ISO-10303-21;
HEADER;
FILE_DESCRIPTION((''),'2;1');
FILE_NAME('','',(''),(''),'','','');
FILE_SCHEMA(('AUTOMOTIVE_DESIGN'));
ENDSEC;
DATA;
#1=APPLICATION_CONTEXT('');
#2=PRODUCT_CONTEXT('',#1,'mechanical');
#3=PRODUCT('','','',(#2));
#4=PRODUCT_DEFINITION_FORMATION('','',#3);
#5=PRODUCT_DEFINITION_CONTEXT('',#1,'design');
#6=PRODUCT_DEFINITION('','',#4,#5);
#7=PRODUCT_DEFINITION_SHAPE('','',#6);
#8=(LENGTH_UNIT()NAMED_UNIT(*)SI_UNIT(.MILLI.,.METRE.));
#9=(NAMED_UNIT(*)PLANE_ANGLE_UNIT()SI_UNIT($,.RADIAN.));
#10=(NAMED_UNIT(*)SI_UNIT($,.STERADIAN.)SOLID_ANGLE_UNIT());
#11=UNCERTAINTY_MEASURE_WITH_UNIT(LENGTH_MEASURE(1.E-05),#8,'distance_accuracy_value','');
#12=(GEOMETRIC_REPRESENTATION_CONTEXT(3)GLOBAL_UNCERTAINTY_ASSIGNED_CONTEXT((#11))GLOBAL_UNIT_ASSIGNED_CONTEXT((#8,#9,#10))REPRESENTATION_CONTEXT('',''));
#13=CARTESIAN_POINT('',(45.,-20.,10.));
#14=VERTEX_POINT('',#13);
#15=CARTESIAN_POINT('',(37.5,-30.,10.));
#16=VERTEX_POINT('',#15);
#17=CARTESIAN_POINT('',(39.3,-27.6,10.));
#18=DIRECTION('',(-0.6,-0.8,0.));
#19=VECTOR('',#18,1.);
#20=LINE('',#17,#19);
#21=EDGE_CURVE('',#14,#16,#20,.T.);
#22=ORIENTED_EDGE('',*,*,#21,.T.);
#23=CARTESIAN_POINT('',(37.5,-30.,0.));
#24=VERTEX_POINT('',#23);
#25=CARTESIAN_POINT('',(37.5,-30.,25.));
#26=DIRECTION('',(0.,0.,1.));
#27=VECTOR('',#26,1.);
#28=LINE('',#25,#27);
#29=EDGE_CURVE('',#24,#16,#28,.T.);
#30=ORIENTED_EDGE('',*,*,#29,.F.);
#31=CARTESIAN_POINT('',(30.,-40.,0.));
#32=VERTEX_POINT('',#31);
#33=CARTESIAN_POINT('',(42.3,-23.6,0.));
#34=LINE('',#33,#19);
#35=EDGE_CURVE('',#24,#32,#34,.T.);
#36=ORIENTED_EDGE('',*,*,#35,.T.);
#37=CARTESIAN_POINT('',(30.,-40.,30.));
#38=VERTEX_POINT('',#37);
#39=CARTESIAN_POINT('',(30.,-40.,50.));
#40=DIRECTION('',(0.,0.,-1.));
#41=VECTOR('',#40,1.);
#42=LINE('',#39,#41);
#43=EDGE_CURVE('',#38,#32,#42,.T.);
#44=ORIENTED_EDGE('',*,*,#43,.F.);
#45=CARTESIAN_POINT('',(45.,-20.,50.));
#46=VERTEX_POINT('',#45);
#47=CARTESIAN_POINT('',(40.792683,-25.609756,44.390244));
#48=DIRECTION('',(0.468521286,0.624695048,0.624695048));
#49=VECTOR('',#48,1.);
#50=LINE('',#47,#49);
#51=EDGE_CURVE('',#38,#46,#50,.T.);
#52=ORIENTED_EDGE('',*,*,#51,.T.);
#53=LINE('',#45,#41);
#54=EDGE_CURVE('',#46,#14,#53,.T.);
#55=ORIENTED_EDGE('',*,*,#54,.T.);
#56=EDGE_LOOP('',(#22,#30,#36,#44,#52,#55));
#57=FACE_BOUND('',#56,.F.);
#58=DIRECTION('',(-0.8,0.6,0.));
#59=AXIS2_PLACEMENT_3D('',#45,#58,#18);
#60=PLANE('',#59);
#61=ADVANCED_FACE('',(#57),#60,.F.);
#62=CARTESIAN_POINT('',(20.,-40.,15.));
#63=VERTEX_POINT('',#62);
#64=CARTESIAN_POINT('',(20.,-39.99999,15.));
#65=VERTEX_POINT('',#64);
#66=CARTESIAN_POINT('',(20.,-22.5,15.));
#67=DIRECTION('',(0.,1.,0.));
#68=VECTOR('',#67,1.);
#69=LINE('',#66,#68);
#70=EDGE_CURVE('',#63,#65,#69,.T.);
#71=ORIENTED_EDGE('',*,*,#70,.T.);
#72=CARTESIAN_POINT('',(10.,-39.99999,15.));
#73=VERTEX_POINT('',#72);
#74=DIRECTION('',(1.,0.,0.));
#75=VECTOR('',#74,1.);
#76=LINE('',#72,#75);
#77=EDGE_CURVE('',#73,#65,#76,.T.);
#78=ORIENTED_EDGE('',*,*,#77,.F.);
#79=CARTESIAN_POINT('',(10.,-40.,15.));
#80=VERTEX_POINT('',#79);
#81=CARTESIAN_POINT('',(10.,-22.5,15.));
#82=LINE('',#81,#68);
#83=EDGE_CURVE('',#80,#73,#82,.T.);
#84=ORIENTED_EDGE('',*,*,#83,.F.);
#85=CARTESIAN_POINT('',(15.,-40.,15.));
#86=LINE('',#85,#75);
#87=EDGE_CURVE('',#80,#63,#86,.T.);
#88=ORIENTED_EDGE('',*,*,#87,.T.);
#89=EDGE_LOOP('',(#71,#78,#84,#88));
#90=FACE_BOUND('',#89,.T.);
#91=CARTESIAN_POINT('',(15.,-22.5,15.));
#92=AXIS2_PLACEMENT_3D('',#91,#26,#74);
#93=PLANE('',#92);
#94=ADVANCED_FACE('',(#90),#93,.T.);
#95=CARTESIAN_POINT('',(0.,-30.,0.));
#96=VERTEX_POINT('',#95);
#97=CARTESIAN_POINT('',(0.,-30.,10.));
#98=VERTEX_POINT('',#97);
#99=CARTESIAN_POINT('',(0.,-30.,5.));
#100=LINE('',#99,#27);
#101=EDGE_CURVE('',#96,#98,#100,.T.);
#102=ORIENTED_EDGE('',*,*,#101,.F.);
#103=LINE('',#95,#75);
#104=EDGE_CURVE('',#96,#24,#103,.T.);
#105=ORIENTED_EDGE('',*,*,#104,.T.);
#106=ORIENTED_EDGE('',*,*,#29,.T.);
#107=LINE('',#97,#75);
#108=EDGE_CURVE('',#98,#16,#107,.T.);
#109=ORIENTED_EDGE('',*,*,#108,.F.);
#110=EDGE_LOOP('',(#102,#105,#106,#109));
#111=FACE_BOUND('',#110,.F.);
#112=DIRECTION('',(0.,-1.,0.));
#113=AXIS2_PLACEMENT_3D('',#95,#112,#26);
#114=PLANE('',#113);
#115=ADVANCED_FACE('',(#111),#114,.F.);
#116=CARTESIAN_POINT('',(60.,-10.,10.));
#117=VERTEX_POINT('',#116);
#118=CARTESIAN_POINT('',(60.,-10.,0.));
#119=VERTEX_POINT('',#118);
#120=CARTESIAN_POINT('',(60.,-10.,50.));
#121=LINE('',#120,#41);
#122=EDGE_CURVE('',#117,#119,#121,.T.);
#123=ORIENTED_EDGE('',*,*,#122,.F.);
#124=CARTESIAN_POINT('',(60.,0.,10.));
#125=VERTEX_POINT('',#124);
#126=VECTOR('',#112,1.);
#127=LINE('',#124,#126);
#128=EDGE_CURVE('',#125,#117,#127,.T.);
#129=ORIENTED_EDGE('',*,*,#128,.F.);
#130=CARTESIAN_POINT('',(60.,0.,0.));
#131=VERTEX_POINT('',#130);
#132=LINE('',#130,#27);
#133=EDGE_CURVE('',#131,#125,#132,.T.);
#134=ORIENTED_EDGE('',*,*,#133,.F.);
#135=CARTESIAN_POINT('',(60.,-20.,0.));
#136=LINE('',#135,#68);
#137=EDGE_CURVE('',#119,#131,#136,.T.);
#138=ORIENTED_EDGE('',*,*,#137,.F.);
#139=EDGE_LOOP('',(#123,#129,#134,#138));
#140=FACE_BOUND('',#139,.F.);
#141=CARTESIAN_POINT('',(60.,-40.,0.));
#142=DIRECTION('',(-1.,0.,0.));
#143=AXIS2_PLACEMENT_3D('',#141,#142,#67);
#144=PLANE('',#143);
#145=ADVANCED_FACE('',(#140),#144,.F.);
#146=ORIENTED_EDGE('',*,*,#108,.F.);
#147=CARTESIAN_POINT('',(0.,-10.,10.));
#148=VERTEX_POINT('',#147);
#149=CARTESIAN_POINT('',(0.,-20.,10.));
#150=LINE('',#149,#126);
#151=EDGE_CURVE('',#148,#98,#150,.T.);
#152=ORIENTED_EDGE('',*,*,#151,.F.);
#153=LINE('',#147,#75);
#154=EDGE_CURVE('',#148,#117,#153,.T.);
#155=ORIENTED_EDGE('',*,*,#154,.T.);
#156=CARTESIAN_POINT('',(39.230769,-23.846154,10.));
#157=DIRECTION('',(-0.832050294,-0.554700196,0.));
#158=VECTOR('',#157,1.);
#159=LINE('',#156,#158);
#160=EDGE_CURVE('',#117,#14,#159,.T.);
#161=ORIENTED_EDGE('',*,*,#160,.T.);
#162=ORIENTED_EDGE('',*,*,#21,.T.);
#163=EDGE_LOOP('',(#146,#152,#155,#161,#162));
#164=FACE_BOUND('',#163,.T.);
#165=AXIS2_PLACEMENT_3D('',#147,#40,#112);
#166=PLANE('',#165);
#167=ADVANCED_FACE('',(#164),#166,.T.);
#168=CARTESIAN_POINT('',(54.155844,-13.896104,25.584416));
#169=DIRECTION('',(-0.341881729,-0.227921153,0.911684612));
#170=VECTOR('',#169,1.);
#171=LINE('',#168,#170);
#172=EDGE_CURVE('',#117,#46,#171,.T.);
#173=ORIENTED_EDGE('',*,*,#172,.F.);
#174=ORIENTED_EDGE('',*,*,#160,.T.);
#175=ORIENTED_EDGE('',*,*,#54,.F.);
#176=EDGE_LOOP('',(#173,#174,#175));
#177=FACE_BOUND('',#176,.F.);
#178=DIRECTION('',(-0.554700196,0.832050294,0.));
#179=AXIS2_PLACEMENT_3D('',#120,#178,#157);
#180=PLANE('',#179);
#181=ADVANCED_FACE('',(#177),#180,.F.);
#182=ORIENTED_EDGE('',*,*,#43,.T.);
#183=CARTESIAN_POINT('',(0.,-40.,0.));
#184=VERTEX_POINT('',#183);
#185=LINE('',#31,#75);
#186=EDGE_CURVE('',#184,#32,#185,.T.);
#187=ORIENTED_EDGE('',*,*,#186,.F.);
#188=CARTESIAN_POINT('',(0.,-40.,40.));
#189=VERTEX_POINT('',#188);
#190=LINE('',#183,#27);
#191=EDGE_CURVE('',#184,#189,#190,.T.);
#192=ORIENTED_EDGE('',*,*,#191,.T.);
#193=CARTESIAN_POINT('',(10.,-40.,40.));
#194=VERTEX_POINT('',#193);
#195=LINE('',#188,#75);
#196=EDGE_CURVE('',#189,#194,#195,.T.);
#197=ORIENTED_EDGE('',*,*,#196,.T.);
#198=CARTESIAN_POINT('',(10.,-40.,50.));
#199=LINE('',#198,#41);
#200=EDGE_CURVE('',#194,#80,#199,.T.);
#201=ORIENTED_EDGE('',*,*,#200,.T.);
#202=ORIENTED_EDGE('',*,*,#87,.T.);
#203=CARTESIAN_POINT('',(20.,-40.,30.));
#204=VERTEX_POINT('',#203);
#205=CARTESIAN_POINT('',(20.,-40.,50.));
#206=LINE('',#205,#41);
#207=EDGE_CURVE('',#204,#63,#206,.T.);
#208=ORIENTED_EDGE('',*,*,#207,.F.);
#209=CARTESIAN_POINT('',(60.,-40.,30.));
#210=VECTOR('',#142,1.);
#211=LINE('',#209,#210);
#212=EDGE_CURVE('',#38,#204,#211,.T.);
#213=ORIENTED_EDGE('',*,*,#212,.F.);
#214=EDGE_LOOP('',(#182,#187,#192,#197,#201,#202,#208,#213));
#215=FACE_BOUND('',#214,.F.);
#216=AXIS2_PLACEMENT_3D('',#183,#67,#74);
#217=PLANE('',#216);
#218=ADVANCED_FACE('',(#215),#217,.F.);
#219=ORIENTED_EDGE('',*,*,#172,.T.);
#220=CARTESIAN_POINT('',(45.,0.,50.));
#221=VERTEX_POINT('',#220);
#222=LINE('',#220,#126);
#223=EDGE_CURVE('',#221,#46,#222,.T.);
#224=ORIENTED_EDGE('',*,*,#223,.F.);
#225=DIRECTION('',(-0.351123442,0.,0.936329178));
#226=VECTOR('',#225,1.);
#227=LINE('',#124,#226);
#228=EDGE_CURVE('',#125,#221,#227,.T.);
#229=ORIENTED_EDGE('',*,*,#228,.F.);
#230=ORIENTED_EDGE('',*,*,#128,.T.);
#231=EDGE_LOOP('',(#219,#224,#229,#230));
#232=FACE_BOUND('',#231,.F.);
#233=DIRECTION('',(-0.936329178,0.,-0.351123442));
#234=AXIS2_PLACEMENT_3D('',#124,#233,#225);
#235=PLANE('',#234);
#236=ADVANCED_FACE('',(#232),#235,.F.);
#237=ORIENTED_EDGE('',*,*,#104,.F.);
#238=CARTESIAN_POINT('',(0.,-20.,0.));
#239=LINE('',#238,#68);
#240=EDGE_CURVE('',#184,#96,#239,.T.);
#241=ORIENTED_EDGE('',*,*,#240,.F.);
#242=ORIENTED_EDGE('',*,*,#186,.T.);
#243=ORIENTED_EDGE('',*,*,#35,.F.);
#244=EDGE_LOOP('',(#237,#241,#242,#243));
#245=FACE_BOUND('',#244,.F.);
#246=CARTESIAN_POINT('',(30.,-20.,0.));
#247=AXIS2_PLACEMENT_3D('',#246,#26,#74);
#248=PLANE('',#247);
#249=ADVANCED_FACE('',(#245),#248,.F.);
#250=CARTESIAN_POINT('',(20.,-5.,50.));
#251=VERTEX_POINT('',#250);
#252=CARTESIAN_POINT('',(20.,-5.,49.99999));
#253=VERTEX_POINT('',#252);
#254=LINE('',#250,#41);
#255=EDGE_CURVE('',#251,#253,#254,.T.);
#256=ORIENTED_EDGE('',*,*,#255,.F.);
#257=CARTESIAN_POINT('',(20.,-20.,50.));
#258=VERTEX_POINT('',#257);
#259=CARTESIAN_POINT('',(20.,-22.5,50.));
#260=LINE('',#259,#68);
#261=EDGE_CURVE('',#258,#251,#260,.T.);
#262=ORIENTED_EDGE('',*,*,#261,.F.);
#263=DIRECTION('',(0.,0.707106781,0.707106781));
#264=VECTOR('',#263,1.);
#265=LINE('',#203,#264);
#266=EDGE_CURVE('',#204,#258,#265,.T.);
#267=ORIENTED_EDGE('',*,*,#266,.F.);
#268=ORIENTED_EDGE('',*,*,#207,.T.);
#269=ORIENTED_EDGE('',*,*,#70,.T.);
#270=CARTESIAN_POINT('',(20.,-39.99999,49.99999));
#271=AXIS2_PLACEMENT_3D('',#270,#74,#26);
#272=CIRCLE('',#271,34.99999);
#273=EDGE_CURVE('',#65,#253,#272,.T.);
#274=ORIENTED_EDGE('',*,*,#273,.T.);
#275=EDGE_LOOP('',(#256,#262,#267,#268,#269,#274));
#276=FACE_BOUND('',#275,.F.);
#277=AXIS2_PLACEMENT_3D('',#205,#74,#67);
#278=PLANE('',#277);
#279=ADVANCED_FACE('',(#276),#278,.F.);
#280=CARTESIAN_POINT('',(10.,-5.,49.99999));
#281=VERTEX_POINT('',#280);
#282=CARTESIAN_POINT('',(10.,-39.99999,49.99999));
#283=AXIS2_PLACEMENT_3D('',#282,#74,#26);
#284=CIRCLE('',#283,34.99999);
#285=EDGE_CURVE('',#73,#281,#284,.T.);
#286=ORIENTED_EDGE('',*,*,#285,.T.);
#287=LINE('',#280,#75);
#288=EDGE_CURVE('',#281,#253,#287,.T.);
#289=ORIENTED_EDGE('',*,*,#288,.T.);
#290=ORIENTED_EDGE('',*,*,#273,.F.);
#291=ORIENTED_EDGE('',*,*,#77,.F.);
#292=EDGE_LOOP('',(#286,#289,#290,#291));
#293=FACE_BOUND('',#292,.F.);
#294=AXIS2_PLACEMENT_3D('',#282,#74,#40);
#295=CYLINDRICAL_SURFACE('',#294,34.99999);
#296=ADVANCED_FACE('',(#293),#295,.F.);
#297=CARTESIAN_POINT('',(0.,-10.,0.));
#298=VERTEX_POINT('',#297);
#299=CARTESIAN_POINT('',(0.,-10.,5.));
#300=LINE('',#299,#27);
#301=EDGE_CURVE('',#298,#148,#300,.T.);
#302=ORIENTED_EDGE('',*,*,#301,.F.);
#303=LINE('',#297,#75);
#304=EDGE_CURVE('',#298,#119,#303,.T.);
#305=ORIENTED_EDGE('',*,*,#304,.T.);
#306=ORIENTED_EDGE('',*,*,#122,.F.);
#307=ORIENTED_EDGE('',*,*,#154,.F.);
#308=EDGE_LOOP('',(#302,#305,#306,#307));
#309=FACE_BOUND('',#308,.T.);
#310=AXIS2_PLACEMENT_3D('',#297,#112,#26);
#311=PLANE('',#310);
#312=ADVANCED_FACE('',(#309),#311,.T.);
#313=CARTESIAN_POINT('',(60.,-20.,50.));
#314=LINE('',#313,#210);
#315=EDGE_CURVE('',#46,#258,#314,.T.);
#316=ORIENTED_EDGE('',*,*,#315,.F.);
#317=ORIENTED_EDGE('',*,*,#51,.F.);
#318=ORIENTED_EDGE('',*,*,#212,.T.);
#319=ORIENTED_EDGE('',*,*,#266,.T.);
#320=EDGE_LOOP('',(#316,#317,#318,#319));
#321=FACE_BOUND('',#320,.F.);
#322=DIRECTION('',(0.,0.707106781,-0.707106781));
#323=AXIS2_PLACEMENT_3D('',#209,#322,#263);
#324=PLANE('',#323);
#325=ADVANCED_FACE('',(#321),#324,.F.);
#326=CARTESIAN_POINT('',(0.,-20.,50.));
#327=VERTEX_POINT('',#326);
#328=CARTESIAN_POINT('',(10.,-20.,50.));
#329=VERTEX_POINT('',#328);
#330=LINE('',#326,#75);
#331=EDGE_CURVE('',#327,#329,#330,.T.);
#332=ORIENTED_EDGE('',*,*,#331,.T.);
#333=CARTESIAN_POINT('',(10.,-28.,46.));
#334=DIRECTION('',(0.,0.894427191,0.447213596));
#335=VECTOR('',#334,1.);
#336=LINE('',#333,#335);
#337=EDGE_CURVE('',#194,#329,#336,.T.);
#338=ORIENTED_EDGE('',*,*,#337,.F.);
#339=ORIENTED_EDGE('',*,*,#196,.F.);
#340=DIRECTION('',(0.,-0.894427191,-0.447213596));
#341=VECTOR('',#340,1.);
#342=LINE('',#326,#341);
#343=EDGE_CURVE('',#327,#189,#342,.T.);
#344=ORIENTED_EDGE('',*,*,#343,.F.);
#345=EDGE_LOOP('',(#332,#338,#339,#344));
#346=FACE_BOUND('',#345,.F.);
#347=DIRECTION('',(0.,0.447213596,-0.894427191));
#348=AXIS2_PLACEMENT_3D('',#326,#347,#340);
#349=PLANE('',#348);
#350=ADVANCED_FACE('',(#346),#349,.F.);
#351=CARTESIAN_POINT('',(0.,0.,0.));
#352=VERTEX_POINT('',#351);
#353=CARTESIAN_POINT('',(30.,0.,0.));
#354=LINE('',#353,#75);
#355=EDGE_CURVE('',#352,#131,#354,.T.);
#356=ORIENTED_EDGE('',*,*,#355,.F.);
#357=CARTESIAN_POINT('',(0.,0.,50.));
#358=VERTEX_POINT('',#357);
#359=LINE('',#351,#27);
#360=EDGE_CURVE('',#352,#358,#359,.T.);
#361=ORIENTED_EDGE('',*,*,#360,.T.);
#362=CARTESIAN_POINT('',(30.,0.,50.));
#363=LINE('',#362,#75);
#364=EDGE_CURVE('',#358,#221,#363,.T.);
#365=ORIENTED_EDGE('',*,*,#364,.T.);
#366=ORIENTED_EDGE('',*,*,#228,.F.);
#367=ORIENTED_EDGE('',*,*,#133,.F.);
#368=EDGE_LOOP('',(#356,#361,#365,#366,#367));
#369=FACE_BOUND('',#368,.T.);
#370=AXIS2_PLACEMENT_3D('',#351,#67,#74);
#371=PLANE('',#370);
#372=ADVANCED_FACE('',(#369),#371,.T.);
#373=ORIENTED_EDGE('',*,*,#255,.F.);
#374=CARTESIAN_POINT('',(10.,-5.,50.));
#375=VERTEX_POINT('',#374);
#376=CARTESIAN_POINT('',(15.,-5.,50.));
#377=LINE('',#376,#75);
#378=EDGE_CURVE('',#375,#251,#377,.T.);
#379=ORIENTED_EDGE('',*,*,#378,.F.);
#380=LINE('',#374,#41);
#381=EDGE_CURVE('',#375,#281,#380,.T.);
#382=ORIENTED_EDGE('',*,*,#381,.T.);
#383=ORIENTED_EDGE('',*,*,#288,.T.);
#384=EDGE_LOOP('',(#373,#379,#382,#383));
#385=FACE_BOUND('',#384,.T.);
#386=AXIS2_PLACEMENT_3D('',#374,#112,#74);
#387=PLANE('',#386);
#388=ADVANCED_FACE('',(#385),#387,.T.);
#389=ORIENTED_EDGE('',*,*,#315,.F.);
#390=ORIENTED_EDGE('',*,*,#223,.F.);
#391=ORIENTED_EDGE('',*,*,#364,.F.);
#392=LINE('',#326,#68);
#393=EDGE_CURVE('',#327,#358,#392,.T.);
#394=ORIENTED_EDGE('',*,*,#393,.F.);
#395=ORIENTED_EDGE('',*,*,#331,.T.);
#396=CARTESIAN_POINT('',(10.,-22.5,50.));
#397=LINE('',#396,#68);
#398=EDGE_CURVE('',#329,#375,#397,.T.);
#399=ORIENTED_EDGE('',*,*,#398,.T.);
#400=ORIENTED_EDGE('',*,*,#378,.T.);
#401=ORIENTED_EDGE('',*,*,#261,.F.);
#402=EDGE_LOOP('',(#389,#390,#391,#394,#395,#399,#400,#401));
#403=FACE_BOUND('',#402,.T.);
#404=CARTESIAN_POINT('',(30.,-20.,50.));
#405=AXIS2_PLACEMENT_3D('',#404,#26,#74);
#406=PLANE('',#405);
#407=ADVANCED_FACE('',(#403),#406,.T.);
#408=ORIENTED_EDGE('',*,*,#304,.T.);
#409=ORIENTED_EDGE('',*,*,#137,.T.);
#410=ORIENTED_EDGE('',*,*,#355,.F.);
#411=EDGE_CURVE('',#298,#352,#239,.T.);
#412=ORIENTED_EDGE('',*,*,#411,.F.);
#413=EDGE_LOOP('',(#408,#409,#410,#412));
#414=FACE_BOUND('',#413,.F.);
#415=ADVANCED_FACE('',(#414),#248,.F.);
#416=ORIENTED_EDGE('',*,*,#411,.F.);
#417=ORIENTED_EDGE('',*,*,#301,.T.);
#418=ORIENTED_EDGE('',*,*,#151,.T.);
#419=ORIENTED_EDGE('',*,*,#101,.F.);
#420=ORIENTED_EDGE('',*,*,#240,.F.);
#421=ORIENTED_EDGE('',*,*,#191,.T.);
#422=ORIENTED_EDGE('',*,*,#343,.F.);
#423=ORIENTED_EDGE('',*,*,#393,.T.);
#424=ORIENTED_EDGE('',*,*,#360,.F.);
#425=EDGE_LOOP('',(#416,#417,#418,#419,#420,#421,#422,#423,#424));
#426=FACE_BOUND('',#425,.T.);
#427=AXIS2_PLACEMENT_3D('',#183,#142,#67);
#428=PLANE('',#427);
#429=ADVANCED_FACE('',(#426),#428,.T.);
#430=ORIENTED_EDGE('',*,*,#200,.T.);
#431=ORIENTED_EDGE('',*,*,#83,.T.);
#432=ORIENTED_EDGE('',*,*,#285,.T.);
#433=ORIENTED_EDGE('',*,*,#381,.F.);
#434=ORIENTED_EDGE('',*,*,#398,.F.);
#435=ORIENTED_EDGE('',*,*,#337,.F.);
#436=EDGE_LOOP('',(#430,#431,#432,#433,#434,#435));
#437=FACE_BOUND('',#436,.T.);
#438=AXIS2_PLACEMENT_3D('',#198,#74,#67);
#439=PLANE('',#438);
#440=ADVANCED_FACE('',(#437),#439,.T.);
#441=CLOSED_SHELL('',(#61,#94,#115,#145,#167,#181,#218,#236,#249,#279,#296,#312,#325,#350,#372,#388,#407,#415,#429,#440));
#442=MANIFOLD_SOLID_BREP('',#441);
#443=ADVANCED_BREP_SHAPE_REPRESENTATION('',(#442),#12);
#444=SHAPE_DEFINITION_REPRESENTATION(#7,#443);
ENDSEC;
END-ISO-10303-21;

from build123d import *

# Parameters (mm, degrees)
F0_W      = 60
F0_H      = 40
F1_DEPTH  = 50
F3_W      = 10
F3_H      = 35
F5_DEPTH  = 35
F6_R      = 34.99999
F7_DEPTH  = 12.7
F9_DEPTH  = 40
F10_DEPTH = 50.001
F12_DEPTH = 20.001
F13_W     = 20
F13_H     = 10
F14_DEPTH = 60.001


# Not quite as in the source:
# - a fillet or chamfer is up to 0.001 mm smaller than in the source, because OpenCascade refuses the exact size


with BuildPart() as f1:
    # F0 (on Top) → F1 (new body)
    with BuildSketch(Plane.XY):
        with Locations((30, -20)):
            Rectangle(F0_W, F0_H)
    extrude(amount=F1_DEPTH)

    # F3 (on face) → F5 (cut, through all)
    with BuildSketch(Plane.XY.offset(50)):
        with Locations((15, -22.5)):
            Rectangle(F3_W, F3_H)
    extrude(amount=-F5_DEPTH, mode=Mode.SUBTRACT)

    # F6 (radius 35 in the source; OpenCascade refuses exactly that, so slightly less here)
    f6_edges = [f1.edges().sort_by_distance(p)[0] for p in [
        (15, -5, 15),
    ]]
    fillet(f6_edges, radius=F6_R)

    # F2 (on face) → F7 (cut)
    with BuildSketch(Plane(origin=(0, 0, 0), x_dir=(0, -1, 0), z_dir=(-1, 0, 0))):
        Polygon((40, 50), (20, 50), (40, 40), align=None)
    extrude(amount=-F7_DEPTH, mode=Mode.SUBTRACT)

    # F8 (on face) → F9 (cut, through all)
    with BuildSketch(Plane.YZ.offset(60)):
        Polygon((-40, 30), (-20, 50), (-40, 50), align=None)
    extrude(amount=-F9_DEPTH, mode=Mode.SUBTRACT)

    # F3 (on face) → F10 (cut, through all)
    with BuildSketch(Plane.XY.offset(50)):
        Polygon((45, -20), (30, -40), (60, -40), (60, -10), align=None)
    extrude(amount=-F10_DEPTH, mode=Mode.SUBTRACT)

    # F11 (on face) → F12 (cut, through all)
    with BuildSketch(Plane(origin=(0, 0, 0), x_dir=(-1, 0, 0), z_dir=(0, 1, 0))):
        Polygon((-60, 10), (-45, 50), (-60, 50), align=None)
    extrude(amount=-F12_DEPTH, mode=Mode.SUBTRACT)

    # F13 (on face) → F14 (cut, through all)
    with BuildSketch(Plane(origin=(0, 0, 0), x_dir=(0, -1, 0), z_dir=(-1, 0, 0))):
        with Locations((20, 5)):
            Rectangle(F13_W, F13_H)
    extrude(amount=-F14_DEPTH, mode=Mode.SUBTRACT)


solid = f1.part
